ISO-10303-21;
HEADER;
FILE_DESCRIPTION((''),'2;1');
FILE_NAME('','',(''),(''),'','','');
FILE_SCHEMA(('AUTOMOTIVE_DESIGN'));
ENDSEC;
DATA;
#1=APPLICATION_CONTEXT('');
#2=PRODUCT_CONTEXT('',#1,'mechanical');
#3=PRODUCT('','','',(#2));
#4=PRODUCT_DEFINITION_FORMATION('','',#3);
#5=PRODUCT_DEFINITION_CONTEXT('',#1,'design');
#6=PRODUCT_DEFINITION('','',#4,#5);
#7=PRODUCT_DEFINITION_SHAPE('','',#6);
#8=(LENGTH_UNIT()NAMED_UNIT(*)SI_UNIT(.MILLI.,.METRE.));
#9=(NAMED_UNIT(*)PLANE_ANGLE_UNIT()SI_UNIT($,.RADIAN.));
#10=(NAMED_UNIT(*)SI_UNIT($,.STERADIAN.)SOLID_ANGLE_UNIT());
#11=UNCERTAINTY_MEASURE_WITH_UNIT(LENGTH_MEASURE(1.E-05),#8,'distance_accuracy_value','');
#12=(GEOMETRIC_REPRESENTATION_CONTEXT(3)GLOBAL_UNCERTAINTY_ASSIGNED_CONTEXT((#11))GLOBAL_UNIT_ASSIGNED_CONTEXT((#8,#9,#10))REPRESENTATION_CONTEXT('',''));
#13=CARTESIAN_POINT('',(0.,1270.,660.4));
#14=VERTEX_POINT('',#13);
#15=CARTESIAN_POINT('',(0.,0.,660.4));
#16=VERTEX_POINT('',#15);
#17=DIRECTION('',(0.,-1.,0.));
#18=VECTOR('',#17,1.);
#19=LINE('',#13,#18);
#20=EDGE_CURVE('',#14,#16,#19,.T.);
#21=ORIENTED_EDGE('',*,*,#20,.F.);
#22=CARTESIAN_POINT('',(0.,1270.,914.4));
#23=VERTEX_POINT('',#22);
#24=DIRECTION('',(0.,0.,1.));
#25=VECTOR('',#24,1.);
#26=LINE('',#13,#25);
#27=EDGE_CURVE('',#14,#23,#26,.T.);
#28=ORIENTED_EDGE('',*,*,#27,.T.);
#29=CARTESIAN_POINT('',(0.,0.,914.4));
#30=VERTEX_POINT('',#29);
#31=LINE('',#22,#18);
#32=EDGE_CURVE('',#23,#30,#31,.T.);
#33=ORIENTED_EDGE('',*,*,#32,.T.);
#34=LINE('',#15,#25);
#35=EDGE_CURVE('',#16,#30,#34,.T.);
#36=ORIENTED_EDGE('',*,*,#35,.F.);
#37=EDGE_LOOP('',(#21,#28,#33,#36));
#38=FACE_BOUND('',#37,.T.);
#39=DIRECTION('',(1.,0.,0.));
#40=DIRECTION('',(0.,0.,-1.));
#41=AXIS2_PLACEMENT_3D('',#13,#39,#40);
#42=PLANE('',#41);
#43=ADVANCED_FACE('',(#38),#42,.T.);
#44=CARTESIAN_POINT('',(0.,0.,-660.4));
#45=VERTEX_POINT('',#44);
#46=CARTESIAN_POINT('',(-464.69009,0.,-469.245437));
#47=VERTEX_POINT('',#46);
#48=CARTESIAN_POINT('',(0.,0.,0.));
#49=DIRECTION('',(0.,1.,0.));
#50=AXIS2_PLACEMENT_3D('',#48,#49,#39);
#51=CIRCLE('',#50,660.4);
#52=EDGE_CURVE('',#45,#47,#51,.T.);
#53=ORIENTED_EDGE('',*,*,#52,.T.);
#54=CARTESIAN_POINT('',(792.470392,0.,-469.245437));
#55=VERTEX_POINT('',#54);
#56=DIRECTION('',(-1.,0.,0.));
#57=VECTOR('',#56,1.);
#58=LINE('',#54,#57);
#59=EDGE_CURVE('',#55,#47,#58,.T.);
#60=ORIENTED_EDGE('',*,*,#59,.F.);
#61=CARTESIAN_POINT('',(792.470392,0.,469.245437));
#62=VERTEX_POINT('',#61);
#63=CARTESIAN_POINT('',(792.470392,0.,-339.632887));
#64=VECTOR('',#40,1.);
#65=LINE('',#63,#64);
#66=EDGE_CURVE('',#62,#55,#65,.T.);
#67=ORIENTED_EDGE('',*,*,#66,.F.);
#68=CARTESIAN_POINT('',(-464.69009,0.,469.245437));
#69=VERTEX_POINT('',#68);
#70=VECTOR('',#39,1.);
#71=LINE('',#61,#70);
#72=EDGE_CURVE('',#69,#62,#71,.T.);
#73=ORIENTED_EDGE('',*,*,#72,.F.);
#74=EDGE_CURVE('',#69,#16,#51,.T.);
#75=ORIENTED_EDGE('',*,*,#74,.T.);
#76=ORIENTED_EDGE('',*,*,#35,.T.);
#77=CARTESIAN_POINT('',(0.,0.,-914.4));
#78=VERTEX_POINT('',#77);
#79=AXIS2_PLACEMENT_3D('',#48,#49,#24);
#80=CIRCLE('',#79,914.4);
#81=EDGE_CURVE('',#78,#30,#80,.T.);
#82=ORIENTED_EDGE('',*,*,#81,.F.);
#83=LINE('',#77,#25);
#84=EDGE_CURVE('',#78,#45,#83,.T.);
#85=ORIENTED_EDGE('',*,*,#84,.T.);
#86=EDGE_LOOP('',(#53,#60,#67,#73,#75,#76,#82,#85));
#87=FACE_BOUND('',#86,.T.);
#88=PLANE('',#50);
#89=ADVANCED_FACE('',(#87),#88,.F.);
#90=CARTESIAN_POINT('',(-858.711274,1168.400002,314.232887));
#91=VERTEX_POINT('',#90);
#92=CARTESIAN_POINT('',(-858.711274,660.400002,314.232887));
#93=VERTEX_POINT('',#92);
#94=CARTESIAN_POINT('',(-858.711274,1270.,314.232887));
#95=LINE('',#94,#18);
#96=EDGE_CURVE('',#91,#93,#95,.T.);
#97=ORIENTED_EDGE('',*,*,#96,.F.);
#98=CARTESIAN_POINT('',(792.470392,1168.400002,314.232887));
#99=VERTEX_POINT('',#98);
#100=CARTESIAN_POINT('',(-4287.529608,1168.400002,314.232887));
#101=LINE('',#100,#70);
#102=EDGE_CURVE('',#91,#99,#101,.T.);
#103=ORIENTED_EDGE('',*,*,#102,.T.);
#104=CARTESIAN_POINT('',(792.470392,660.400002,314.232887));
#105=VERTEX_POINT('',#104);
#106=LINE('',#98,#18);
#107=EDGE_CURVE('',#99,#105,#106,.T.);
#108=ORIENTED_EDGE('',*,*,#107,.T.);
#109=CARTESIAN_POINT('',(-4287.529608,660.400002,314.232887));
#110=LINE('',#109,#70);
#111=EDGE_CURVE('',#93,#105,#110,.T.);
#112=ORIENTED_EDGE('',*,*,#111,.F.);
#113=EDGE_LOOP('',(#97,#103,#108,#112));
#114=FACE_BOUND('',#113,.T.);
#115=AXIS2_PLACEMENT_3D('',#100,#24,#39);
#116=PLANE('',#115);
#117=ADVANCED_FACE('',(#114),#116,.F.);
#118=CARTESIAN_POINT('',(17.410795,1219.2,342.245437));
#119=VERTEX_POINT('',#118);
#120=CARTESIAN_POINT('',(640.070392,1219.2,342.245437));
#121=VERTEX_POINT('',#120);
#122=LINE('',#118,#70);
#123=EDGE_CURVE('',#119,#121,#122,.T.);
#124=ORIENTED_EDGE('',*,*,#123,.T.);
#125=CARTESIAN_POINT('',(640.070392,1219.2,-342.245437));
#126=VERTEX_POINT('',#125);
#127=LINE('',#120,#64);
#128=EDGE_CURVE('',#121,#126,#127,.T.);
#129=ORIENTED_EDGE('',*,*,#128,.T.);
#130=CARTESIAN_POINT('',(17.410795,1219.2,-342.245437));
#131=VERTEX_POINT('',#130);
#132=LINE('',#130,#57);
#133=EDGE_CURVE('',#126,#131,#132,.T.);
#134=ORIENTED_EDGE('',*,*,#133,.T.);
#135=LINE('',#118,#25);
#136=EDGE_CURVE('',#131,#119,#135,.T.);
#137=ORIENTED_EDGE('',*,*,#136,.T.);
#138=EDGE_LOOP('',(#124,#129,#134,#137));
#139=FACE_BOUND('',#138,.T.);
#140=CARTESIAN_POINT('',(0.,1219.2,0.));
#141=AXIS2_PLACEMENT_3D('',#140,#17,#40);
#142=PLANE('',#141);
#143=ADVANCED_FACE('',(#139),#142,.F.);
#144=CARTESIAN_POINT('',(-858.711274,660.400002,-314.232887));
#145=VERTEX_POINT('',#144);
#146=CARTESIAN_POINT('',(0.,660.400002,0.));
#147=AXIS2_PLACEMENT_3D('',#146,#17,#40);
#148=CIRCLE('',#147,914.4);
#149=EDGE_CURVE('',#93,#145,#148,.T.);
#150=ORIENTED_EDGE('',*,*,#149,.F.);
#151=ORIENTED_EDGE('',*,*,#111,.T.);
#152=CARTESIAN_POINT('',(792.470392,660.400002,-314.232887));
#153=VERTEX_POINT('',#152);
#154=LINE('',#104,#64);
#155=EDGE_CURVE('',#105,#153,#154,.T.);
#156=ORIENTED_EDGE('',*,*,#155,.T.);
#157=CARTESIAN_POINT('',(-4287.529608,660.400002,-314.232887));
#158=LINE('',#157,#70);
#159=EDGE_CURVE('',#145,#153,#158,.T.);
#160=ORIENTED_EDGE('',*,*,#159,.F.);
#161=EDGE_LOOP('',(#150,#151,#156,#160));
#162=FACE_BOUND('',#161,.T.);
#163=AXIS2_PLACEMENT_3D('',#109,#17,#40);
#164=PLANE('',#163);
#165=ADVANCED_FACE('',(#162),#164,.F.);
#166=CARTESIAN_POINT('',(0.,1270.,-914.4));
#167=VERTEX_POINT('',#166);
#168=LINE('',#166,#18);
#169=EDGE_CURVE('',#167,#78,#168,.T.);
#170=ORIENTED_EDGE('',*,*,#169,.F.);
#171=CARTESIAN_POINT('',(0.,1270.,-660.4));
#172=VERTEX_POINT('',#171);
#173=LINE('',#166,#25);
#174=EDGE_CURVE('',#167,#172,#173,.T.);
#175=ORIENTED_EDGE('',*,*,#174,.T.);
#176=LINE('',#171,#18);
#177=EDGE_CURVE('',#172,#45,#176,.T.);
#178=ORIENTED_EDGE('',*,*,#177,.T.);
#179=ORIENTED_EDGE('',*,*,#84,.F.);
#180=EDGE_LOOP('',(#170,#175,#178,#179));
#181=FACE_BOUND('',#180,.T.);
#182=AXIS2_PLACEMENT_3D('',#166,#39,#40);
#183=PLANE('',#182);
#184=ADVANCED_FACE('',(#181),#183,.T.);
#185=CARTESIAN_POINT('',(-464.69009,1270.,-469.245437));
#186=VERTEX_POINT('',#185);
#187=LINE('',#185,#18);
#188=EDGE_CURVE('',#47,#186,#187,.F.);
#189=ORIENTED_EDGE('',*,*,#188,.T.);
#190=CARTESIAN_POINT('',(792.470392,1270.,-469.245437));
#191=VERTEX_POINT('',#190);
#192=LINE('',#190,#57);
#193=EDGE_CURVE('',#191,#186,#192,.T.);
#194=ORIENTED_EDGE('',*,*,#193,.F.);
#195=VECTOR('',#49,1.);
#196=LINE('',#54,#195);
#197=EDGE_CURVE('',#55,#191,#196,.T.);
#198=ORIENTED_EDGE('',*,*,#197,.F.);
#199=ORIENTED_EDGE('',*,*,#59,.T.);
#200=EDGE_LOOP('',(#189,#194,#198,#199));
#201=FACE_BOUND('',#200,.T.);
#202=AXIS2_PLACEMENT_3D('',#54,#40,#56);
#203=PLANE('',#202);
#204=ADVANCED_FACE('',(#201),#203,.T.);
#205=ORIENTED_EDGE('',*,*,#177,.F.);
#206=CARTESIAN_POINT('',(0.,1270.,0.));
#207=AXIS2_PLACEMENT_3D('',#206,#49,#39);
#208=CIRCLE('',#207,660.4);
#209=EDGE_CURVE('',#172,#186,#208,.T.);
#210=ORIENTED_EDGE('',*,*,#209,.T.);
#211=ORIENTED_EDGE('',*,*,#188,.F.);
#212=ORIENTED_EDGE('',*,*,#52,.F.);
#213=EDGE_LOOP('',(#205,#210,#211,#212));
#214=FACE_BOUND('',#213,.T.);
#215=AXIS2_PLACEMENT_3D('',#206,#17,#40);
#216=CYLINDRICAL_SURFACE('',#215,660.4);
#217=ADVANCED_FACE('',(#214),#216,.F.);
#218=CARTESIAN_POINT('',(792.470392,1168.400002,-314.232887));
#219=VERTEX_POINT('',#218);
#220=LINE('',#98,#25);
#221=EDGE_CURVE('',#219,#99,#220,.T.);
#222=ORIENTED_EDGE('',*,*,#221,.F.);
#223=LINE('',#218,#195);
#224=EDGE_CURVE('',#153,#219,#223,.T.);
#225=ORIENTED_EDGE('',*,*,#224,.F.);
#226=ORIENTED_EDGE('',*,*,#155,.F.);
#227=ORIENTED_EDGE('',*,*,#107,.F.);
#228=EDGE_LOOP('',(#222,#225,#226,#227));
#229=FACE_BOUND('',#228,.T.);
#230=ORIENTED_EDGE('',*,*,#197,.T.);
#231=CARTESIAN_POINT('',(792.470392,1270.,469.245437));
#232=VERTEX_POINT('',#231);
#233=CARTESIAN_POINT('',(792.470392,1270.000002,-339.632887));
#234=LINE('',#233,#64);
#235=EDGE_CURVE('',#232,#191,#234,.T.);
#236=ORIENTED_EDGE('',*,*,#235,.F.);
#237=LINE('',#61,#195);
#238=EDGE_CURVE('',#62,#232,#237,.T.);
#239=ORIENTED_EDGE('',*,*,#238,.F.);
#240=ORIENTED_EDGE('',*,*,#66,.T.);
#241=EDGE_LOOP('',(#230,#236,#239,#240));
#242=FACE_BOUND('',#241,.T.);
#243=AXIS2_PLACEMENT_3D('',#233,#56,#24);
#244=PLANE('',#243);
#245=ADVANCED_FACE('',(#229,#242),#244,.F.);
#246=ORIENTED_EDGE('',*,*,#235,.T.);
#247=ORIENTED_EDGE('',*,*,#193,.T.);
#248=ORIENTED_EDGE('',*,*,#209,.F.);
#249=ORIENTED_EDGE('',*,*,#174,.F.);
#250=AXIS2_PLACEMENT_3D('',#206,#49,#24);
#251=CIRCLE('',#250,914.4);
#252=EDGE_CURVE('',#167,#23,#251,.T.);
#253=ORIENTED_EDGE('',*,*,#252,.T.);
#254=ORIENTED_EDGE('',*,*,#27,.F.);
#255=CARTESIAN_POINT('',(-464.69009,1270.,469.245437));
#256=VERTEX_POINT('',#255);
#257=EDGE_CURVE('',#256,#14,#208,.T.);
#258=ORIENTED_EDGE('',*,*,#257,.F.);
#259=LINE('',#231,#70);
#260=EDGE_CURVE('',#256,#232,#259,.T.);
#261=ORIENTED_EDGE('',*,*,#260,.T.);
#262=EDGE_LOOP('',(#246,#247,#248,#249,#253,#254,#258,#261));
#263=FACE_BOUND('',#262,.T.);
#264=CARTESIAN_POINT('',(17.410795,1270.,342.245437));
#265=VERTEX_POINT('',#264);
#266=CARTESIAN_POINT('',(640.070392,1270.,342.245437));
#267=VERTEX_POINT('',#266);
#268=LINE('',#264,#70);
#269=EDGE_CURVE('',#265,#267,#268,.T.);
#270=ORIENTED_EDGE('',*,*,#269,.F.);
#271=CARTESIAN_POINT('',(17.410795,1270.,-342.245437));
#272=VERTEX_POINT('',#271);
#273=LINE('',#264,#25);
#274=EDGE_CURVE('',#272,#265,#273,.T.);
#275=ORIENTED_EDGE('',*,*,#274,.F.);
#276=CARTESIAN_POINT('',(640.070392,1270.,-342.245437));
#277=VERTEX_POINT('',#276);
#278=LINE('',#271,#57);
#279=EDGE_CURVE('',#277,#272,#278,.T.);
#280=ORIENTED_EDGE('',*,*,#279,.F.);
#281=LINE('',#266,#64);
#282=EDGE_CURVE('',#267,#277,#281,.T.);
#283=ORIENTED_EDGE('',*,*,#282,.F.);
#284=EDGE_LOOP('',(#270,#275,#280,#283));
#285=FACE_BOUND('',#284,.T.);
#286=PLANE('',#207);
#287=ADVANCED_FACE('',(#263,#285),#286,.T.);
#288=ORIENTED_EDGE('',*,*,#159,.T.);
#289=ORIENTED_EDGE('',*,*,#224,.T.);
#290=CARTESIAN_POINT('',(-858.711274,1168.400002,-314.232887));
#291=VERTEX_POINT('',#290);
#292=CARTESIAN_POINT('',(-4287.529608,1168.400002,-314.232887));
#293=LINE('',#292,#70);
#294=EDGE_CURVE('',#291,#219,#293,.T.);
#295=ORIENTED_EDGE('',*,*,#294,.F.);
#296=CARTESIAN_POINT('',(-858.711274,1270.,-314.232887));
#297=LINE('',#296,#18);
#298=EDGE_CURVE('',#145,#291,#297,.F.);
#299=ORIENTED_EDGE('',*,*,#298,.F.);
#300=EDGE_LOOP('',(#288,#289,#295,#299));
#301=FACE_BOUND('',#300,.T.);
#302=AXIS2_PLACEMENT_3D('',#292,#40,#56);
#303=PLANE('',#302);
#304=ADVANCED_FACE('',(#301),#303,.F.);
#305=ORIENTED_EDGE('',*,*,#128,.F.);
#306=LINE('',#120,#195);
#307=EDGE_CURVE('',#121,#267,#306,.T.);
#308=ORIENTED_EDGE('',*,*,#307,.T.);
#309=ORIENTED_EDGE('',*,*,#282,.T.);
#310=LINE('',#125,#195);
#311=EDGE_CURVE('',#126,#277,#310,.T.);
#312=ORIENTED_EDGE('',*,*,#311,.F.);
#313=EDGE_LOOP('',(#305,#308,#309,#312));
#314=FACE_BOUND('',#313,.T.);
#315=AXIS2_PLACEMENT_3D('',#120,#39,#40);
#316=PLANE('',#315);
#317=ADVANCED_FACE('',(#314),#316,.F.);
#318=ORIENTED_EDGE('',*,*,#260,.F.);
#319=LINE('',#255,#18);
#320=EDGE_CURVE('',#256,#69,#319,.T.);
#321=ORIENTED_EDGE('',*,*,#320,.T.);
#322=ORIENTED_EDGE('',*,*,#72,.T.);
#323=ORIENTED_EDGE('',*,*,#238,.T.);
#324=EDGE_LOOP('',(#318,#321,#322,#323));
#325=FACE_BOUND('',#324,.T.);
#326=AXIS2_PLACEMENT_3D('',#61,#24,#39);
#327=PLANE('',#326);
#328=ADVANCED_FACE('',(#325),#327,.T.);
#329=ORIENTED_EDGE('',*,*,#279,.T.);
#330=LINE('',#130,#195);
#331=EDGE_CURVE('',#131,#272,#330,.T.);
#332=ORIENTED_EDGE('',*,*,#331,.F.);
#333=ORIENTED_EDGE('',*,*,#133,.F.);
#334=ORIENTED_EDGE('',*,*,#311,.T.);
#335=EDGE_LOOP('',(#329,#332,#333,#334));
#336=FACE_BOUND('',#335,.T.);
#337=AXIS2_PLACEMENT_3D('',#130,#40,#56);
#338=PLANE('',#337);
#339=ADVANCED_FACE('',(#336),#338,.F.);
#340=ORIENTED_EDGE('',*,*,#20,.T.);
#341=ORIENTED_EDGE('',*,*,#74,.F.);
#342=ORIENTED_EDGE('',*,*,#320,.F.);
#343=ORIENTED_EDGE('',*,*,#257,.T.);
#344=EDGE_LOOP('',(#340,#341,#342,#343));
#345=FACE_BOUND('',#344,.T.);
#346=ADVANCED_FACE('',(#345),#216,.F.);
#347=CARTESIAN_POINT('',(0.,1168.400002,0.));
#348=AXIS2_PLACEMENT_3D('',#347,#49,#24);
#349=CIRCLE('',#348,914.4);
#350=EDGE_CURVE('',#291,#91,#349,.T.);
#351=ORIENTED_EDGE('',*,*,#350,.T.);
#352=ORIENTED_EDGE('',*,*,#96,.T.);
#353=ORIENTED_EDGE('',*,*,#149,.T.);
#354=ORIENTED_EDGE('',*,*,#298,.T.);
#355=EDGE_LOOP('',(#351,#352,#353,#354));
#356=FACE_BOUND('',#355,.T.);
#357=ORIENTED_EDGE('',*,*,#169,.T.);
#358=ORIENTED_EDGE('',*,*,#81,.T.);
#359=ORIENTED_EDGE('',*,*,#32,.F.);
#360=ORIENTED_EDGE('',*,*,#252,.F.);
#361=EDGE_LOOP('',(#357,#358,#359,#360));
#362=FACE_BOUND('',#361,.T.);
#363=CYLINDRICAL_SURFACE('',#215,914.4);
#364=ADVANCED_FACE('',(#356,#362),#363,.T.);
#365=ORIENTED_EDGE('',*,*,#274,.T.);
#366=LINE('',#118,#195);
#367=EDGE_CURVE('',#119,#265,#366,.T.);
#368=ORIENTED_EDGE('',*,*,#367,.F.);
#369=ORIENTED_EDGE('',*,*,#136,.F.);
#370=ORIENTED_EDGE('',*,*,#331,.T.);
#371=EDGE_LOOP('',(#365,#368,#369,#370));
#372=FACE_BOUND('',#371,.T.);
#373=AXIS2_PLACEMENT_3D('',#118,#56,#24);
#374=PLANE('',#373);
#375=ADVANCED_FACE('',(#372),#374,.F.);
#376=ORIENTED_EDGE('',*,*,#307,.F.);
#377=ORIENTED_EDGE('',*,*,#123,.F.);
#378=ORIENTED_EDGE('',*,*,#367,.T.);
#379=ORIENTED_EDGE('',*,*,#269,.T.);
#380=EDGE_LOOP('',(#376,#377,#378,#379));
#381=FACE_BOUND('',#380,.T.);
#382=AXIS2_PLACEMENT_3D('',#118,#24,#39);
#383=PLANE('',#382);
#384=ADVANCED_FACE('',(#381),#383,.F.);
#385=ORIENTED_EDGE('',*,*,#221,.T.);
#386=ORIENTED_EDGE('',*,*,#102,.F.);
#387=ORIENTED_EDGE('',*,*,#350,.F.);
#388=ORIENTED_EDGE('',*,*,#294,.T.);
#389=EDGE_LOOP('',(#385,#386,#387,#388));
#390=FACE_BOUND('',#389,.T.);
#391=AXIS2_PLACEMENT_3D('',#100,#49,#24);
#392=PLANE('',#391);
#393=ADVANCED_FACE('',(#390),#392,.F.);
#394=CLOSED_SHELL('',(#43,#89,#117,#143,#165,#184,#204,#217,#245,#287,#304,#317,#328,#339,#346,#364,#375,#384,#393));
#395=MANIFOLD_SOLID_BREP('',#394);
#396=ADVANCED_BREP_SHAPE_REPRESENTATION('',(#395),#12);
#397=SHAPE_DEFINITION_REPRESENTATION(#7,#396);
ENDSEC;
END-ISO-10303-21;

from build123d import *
from OCP.BRepAlgoAPI import BRepAlgoAPI_Cut
from OCP.TopTools import TopTools_ListOfShape

# Parameters (mm, degrees)
EXTRUDE_1_DEPTH     = 1270
SKETCH_5_W          = 72.235282366
SKETCH_5_H          = 338.817872049
EXTRUDE_1_2_DEPTH   = 1270
SKETCH_9_W          = 66.439449902
SKETCH_9_H          = 119.69450016
EXTRUDE_2_DEPTH     = 1270
SKETCH_779_W        = 1584.940783878
SKETCH_779_H        = 679.265773974
EXTRUDE_7_DEPTH     = 1270.000001702
SKETCH_15_W         = 628.465773974
SKETCH_15_H         = 508
CUT_EXTRUDE_1_DEPTH = 5080
SKETCH_16_W         = 1396.738419433
SKETCH_16_H         = 129.612550511
EXTRUDE_8_DEPTH     = 1270
SKETCH_17_W         = 1408.739581517
SKETCH_17_H         = 129.612550511
EXTRUDE_9_DEPTH     = 1270
SKETCH_20_W         = 622.659597216
SKETCH_20_H         = 684.490874996
CUT_EXTRUDE_2_DEPTH = 50.8


with BuildPart() as part:
    # 草圖1 → Extrude 1 (new body)
    with BuildSketch(Plane(origin=(0, 0, 0), x_dir=(1, 0, 0), z_dir=(0, 1, 0))):
        with BuildLine():
            ThreePointArc((0, 914.4), (-914.4, 0), (0, -914.4))
            Line((0, -914.4), (0, -660.4))
            ThreePointArc((0, -660.4), (-660.4, 0), (0, 660.4))
            Line((0, 660.4), (0, 914.4))
        make_face()
    extrude(amount=EXTRUDE_1_DEPTH)

    # 草圖5 → Extrude 1 2 (add, through all)
    with BuildSketch(Plane(origin=(0, 1270, 0), x_dir=(1, 0, 0), z_dir=(0, 1, 0))):
        with Locations((-828.280286412, 6.324353143)):
            Rectangle(SKETCH_5_W, SKETCH_5_H)
    extrude(amount=-EXTRUDE_1_2_DEPTH)

    # 草圖9 → 填補2 (add, through all)
    with BuildSketch(Plane(origin=(0, 1270, 0), x_dir=(1, 0, 0), z_dir=(0, 1, 0))):
        with Locations((-825.38237018, -198.335355397)):
            Rectangle(SKETCH_9_W, SKETCH_9_H)
    extrude(amount=-EXTRUDE_2_DEPTH)

    # Sketch 779 → 填料-伸長7 (add)
    with BuildSketch(Plane(origin=(0, 0, 0), x_dir=(1, 0, 0), z_dir=(0, 1, 0))):
        Rectangle(SKETCH_779_W, SKETCH_779_H)
    extrude(amount=EXTRUDE_7_DEPTH)

    # 草圖15 → 除料-伸長1 (cut)
    with BuildSketch(Plane(origin=(792.470391939, 0, 0), x_dir=(0, 0, -1), z_dir=(1, 0, 0))):
        with Locations((0, 914.400001702)):
            Rectangle(SKETCH_15_W, SKETCH_15_H)
    extrude(amount=-CUT_EXTRUDE_1_DEPTH, mode=Mode.SUBTRACT)

    # 草圖16 → 填料-伸長8 (add, through all)
    with BuildSketch(Plane(origin=(0, 1270, 0), x_dir=(1, 0, 0), z_dir=(0, 1, 0))):
        with Locations((94.101182222, -404.439162243)):
            Rectangle(SKETCH_16_W, SKETCH_16_H)
    extrude(amount=-EXTRUDE_8_DEPTH)

    # 草圖17 → 填料-伸長9 (add, through all)
    with BuildSketch(Plane(origin=(0, 1270, 0), x_dir=(1, 0, 0), z_dir=(0, 1, 0))):
        with Locations((88.100601181, 404.439162243)):
            Rectangle(SKETCH_17_W, SKETCH_17_H)
    extrude(amount=-EXTRUDE_9_DEPTH)


with BuildPart() as cut_extrude_2_tool:
    # 草圖20 → 除料-伸長2 (new body)
    with BuildSketch(Plane(origin=(0, 1270, 0), x_dir=(1, 0, 0), z_dir=(0, 1, 0))):
        with Locations((328.740593331, 0)):
            Rectangle(SKETCH_20_W, SKETCH_20_H)
    extrude(amount=-CUT_EXTRUDE_2_DEPTH)


with BuildPart() as part_1:
    add(part.part)

    # 除料-伸長2: cut by cut_extrude_2_tool, with a tolerance
    cut_extrude_2_stock = TopTools_ListOfShape()
    cut_extrude_2_stock.Append(part_1.part.wrapped)
    cut_extrude_2_tools = TopTools_ListOfShape()
    cut_extrude_2_tools.Append(cut_extrude_2_tool.part.wrapped)
    cut_extrude_2_cut = BRepAlgoAPI_Cut()
    cut_extrude_2_cut.SetArguments(cut_extrude_2_stock)
    cut_extrude_2_cut.SetTools(cut_extrude_2_tools)
    cut_extrude_2_cut.SetFuzzyValue(0.00001)
    cut_extrude_2_cut.Build()
    add(Compound.cast(cut_extrude_2_cut.Shape()).solids(), mode=Mode.REPLACE)


solid = part_1.part
